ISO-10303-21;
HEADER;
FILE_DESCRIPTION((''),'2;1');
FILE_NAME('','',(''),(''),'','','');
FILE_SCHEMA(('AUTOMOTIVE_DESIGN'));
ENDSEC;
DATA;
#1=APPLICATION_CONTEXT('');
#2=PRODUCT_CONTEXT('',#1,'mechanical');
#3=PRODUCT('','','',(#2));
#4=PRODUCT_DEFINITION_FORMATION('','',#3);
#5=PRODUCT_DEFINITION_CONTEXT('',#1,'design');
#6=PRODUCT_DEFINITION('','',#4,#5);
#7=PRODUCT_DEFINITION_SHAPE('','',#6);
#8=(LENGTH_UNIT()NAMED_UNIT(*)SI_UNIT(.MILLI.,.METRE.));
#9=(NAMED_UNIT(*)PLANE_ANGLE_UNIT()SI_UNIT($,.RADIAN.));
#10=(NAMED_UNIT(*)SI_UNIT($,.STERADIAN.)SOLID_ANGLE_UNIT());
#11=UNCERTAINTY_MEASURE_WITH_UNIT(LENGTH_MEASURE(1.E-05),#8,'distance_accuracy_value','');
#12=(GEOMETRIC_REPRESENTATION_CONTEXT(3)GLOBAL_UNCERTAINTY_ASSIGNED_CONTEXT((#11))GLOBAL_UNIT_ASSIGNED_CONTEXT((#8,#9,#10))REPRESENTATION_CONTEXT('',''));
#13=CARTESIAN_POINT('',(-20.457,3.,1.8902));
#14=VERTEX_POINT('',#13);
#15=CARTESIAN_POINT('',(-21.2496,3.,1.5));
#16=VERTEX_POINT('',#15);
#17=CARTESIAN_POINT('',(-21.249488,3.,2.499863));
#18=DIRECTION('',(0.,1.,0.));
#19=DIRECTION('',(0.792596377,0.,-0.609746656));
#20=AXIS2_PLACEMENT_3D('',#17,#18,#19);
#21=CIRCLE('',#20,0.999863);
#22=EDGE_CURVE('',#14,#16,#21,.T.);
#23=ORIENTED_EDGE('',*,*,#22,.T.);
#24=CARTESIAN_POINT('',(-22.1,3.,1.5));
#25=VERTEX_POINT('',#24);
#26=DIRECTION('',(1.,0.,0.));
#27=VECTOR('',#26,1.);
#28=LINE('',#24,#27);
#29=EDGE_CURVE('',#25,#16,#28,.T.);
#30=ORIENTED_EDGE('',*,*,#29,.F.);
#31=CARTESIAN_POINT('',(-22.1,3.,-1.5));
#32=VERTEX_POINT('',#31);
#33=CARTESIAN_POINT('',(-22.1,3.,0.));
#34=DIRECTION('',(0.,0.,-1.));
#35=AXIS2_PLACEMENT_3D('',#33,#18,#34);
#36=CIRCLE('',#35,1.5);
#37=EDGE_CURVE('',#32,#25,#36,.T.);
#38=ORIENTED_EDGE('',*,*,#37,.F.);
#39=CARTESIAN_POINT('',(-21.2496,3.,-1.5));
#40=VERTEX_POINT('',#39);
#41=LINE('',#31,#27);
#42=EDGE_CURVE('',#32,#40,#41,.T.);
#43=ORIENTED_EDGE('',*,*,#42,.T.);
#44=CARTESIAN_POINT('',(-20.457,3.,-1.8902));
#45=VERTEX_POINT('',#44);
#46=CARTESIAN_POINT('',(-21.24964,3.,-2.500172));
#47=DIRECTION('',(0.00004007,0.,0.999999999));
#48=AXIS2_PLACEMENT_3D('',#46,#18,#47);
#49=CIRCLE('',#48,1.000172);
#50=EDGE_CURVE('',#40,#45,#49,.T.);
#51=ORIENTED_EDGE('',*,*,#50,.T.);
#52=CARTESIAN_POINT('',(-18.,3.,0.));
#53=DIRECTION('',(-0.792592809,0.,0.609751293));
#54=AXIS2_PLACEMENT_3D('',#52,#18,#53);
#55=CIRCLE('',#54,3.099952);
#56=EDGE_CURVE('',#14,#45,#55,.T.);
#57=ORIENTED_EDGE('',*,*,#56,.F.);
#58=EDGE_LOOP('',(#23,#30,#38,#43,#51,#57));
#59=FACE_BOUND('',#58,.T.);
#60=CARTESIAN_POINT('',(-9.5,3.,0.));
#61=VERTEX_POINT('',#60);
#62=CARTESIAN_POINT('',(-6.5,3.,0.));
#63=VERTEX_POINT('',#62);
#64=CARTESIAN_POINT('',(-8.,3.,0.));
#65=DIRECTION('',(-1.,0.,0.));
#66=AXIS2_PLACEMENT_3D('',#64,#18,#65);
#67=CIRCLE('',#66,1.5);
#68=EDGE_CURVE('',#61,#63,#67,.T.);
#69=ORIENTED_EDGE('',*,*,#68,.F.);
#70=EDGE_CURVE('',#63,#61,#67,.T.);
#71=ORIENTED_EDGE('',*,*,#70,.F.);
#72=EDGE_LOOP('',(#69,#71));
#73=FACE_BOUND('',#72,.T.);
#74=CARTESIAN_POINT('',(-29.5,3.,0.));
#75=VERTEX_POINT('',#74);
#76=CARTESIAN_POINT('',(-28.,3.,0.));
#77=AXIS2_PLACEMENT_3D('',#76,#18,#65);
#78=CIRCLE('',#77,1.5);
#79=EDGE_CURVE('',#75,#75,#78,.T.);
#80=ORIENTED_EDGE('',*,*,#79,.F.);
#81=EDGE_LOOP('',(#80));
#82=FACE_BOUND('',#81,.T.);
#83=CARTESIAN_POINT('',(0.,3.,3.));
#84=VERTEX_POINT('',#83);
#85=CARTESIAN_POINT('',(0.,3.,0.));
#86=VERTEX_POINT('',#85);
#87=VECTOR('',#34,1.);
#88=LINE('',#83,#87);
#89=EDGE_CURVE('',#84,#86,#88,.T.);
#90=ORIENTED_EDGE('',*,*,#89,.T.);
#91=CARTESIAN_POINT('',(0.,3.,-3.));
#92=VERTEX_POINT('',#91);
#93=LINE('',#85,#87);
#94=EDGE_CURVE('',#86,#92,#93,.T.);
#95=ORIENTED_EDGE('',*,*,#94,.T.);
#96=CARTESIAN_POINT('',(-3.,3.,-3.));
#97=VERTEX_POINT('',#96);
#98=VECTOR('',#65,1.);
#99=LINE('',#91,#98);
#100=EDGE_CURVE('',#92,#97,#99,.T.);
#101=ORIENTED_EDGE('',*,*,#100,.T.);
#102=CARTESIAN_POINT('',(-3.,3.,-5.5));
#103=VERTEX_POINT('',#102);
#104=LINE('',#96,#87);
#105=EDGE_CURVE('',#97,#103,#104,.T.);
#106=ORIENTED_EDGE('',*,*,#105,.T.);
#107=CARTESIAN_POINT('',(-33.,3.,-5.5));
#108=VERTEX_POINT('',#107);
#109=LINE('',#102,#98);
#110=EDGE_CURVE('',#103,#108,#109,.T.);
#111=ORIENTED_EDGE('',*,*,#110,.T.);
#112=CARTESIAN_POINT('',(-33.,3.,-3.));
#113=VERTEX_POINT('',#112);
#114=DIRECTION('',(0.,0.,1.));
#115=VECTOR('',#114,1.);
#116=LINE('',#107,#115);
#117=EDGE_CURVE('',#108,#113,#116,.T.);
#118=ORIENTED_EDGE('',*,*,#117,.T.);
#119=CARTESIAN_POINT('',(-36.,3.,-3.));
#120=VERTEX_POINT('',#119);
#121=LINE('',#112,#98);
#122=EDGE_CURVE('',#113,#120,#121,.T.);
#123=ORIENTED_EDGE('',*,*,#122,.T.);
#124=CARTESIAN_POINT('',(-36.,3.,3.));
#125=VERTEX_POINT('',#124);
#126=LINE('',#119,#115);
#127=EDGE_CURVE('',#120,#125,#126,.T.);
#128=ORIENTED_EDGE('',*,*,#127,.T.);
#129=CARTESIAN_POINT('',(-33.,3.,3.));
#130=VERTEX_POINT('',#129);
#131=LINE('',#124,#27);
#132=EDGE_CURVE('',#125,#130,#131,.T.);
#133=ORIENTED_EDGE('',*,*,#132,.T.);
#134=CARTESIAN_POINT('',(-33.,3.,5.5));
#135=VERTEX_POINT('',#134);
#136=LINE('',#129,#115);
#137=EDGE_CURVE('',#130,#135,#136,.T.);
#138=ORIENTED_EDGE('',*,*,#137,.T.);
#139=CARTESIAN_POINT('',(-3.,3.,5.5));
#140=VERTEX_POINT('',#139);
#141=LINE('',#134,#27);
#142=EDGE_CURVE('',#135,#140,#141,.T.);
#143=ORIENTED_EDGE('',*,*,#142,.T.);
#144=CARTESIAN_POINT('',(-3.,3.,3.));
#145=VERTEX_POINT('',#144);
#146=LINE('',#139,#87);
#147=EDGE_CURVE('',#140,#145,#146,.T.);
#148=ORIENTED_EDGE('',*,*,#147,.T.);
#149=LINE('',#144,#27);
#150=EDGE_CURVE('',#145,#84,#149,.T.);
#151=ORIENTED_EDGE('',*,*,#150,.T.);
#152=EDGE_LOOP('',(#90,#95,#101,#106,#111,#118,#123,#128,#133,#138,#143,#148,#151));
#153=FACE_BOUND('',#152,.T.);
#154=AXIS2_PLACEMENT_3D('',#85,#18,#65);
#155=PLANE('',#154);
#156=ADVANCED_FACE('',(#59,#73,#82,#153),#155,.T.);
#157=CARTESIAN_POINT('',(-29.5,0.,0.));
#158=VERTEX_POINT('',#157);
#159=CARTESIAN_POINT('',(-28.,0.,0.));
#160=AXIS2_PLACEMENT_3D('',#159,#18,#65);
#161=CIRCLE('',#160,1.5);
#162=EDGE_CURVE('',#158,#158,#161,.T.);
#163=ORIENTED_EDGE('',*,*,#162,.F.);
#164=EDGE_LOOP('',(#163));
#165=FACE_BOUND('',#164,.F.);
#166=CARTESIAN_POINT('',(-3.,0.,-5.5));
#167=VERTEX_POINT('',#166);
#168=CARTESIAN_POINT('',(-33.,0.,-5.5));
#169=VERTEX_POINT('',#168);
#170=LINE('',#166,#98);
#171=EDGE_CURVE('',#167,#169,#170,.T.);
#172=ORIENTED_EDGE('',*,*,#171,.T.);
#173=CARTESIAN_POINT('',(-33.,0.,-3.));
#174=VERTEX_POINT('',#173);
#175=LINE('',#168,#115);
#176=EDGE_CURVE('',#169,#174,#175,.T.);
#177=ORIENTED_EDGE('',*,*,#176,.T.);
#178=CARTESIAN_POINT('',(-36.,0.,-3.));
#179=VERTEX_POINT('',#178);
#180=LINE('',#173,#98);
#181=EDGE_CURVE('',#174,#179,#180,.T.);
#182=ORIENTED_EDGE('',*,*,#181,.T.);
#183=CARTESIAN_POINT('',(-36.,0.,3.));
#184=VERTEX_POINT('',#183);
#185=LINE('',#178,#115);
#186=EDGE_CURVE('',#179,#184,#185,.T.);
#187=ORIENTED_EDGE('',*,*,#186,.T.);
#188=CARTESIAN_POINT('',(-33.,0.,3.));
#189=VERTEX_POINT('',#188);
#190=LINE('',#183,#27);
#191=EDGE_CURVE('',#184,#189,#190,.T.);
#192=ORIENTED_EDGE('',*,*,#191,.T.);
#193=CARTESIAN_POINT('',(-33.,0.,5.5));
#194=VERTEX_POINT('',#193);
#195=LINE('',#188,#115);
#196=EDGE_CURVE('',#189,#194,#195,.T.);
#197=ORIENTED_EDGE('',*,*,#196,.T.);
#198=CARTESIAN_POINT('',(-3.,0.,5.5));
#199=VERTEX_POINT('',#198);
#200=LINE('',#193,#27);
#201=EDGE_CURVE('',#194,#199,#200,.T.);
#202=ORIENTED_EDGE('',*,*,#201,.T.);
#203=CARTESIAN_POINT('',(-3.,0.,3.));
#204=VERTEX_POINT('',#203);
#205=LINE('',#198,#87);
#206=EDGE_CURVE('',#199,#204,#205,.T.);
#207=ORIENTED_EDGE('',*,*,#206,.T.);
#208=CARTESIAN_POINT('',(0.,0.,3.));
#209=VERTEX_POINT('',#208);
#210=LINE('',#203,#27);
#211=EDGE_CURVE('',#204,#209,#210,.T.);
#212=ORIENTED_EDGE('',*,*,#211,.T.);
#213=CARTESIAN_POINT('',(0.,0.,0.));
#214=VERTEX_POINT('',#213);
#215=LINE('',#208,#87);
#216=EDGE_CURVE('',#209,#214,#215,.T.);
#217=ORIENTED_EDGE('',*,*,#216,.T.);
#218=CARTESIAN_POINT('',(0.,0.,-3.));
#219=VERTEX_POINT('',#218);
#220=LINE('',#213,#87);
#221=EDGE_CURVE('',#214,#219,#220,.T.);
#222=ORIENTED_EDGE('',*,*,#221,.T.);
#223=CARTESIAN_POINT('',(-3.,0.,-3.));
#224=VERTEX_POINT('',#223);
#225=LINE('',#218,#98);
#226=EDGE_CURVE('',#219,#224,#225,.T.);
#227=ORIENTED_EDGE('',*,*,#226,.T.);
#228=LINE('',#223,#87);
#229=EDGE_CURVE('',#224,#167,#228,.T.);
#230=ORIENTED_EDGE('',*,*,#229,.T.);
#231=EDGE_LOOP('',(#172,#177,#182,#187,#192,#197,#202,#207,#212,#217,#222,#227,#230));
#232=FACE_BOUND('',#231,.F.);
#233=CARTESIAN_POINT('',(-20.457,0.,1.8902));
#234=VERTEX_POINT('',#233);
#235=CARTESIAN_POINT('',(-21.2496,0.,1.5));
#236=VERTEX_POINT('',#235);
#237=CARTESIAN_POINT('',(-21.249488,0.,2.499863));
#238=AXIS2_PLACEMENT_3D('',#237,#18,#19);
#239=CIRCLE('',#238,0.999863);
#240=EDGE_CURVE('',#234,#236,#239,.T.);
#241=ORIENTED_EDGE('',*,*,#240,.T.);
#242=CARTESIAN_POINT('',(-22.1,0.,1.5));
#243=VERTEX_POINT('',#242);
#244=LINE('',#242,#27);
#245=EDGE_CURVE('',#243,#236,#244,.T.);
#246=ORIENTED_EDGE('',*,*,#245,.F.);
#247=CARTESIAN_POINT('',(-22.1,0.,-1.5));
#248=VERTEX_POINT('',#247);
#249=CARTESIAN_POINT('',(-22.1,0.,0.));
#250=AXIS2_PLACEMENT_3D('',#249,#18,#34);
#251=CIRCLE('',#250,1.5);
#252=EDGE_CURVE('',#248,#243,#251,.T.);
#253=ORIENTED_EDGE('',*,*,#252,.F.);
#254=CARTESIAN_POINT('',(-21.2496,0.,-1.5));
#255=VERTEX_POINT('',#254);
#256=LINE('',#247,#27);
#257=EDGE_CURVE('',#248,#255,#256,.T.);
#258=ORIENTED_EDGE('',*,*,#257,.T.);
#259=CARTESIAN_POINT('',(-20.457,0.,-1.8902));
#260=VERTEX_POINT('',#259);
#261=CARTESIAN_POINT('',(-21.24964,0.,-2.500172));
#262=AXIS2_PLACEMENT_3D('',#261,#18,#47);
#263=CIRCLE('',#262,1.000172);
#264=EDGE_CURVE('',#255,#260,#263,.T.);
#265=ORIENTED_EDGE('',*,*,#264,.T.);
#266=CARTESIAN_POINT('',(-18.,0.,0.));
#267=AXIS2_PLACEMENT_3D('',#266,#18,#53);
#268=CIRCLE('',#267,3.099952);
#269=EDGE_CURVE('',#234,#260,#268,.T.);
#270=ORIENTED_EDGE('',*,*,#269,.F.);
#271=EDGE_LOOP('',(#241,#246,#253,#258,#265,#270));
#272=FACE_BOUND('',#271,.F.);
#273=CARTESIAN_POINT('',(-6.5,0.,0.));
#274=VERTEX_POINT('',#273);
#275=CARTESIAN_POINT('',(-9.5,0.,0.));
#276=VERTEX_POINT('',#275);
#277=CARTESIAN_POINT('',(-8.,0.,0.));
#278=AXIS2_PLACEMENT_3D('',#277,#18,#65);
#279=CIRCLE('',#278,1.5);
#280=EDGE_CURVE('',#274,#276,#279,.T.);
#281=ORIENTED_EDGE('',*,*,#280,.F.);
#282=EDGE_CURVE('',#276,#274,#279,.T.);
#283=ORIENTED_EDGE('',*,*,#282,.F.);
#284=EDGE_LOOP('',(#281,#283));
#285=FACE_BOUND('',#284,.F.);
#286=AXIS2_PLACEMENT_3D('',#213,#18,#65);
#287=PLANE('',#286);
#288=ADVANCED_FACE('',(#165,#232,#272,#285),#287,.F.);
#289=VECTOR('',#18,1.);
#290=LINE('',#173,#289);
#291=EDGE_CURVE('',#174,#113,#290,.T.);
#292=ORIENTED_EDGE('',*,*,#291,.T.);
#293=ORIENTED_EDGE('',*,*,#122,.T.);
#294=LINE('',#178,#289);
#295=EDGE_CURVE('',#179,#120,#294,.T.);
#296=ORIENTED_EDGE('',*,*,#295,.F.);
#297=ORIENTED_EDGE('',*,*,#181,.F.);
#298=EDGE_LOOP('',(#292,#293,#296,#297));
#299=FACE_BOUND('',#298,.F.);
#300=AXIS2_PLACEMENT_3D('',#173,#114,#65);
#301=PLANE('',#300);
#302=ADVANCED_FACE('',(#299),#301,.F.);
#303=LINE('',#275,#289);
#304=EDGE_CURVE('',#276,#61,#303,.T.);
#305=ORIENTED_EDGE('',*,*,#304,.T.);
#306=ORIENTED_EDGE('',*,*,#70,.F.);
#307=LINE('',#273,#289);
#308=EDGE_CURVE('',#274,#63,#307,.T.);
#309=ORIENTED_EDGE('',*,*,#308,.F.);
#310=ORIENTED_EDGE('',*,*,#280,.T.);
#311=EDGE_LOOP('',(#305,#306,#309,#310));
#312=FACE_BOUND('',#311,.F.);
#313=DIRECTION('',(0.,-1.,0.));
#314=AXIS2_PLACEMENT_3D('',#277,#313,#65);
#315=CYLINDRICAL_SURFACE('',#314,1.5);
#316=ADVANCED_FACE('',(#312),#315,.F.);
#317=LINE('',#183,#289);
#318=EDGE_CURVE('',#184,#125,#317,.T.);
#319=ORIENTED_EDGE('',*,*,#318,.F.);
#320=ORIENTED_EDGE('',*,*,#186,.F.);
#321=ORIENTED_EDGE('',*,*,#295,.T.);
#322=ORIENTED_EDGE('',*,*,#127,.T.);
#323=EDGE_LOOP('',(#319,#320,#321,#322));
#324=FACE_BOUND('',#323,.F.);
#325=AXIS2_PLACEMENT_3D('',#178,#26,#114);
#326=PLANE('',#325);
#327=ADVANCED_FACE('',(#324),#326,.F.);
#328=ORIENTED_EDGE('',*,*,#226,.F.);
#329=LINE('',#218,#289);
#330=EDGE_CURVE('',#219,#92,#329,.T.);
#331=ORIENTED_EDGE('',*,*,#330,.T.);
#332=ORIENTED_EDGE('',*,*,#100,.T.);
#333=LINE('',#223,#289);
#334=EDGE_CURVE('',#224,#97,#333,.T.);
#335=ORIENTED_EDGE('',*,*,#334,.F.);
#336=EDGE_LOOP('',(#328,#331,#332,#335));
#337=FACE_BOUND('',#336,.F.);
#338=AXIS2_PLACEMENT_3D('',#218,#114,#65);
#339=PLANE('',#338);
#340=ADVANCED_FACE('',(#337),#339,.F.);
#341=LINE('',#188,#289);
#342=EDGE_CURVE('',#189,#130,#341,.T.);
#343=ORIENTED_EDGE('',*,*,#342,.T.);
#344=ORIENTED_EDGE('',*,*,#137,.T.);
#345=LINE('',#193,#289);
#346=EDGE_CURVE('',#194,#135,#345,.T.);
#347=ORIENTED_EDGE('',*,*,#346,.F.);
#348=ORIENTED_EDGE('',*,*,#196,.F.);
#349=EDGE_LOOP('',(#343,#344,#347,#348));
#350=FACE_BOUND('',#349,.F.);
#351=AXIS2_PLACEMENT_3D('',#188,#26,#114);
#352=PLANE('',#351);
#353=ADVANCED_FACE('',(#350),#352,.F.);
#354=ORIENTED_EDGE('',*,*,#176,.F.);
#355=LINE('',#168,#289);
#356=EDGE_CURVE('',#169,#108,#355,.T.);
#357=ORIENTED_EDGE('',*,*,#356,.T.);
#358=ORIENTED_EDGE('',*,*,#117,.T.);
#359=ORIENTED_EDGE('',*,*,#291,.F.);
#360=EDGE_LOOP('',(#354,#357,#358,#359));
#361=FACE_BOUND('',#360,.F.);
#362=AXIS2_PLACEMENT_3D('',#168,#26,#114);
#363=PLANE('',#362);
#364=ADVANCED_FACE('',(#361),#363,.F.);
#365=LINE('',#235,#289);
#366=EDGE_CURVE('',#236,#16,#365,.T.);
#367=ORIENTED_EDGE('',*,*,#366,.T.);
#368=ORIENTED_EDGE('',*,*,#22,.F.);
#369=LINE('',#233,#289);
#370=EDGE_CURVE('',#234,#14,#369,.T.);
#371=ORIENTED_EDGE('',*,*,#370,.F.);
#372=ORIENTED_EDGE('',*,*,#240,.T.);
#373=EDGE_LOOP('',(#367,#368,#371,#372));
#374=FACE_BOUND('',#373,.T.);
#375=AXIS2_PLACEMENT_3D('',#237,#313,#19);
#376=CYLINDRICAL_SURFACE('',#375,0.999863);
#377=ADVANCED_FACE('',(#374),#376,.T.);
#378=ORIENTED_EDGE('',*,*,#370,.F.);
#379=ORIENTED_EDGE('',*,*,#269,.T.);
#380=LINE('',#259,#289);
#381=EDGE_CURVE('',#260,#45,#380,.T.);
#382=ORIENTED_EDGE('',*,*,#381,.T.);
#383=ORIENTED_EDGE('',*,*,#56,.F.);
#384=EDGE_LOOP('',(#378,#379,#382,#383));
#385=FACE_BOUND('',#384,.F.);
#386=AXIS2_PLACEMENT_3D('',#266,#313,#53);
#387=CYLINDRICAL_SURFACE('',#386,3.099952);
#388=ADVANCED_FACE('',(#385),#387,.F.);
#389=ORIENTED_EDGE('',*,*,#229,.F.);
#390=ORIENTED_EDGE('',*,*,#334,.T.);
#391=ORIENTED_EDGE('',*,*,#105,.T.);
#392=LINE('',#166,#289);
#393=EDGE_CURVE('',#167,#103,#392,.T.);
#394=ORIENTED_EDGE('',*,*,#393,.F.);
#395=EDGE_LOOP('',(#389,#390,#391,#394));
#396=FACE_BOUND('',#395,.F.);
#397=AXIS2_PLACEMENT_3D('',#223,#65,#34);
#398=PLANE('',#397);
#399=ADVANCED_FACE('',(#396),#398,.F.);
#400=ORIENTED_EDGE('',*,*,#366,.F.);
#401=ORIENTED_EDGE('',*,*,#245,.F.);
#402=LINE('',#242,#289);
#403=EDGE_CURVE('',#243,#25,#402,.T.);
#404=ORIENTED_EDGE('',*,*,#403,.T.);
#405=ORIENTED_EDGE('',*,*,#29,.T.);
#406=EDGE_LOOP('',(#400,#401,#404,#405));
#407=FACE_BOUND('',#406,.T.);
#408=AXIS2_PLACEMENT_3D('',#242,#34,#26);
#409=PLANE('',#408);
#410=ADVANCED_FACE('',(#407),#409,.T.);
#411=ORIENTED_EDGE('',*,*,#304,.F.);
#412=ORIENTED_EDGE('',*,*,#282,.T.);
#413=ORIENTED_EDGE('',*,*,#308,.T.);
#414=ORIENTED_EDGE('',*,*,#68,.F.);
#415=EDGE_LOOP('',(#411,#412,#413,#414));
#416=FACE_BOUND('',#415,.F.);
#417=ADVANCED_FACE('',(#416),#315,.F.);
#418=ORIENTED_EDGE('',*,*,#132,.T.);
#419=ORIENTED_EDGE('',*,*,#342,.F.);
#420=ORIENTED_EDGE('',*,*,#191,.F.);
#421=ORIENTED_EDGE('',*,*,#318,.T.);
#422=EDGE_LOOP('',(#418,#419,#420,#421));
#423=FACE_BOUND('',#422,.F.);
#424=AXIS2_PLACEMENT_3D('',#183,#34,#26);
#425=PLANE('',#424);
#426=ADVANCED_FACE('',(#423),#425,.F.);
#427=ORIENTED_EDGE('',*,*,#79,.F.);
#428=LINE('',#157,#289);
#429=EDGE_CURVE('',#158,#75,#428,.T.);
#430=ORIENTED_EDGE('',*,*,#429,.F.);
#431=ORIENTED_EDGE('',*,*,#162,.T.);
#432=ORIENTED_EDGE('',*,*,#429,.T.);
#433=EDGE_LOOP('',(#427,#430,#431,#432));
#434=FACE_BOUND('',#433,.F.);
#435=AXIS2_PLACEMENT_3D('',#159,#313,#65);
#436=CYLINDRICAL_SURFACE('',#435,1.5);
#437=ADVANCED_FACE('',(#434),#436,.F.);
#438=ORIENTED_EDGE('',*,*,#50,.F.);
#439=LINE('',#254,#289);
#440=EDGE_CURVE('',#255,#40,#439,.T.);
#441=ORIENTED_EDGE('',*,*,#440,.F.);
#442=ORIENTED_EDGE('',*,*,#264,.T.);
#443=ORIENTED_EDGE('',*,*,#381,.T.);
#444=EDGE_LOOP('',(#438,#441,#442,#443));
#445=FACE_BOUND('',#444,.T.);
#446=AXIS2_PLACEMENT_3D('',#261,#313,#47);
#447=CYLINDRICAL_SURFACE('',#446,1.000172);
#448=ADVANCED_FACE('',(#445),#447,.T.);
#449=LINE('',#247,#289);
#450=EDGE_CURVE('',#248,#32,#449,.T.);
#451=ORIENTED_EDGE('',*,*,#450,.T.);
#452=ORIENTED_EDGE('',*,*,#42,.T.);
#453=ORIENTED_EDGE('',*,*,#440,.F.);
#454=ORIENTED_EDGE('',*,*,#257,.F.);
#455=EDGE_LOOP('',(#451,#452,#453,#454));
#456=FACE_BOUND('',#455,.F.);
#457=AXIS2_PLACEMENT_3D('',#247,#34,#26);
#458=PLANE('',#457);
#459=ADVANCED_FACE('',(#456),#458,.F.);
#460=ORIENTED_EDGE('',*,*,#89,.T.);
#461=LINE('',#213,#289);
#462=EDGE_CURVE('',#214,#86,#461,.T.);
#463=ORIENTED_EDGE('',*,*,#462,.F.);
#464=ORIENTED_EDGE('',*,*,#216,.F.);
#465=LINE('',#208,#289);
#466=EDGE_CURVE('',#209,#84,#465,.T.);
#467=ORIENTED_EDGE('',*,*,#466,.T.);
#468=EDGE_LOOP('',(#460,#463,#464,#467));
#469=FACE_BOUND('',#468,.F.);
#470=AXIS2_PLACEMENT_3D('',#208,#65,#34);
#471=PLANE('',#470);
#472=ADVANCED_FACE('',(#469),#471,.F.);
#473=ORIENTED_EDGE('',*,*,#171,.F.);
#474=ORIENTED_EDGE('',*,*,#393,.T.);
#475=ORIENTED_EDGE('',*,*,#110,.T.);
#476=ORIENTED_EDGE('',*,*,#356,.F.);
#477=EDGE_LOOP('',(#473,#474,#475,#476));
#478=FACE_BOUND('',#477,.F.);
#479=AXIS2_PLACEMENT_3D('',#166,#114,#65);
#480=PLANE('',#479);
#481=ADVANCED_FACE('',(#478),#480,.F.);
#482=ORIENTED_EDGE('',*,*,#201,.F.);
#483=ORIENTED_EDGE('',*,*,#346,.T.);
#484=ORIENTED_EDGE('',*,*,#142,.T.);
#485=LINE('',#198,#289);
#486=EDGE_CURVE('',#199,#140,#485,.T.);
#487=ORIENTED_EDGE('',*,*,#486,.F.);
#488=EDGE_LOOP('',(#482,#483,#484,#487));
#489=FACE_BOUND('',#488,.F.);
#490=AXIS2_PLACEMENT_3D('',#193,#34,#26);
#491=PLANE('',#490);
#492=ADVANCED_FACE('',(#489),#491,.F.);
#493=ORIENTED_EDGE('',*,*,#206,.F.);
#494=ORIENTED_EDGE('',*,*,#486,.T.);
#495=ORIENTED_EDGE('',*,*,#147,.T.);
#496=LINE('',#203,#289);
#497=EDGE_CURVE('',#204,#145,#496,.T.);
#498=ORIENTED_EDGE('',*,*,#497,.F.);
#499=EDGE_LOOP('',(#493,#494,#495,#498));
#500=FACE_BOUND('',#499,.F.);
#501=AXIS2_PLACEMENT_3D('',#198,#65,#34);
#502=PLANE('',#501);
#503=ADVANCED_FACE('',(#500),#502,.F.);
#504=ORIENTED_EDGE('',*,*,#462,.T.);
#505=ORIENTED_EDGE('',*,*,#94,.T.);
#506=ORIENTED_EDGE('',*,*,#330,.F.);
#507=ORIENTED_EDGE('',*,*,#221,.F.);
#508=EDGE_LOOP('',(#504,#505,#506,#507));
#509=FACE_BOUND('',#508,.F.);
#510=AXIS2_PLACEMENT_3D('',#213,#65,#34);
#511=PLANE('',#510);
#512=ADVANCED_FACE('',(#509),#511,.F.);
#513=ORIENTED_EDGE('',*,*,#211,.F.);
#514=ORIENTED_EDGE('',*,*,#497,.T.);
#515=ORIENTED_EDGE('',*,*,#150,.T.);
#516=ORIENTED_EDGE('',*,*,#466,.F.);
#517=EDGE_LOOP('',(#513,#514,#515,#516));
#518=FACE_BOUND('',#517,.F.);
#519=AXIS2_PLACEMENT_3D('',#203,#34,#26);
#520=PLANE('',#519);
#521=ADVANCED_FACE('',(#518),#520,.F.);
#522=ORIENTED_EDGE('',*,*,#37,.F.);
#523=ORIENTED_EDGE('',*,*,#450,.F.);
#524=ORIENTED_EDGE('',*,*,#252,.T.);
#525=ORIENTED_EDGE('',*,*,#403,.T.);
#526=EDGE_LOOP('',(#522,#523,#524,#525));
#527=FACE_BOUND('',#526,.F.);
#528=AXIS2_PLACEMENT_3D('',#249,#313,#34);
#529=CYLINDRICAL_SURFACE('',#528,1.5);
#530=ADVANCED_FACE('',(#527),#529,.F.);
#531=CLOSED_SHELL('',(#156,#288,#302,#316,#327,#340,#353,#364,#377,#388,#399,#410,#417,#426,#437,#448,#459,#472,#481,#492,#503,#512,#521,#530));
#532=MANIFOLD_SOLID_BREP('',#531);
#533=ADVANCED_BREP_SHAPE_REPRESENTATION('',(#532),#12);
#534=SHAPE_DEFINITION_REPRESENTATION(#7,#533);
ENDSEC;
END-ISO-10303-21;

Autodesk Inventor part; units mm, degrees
ref_plane "YZ Plane" through (0, 0, 0) normal (1, 0, 0) x (0, 1, 0)
ref_plane "XZ Plane" through (0, 0, 0) normal (0, 1, 0) x (-1, 0, 0)
ref_plane "XY Plane" through (0, 0, 0) normal (0, 0, 1) x (1, 0, 0)
sketch "Sketch1" plane through (0, 0, 0) normal (0, 1, 0) x (-1, 0, 0)
  line L0 (0, 0) -> (0, -3)
  line L1 (0, -3) -> (3, -3)
  line L2 (3, -3) -> (3, -5.5)
  line L3 (3, -5.5) -> (33, -5.5)
  line L4 (33, -5.5) -> (33, -3)
  line L5 (33, -3) -> (36, -3)
  line L6 (36, -3) -> (36, 3)
  line L7 (36, 3) -> (33, 3)
  line L8 (33, 3) -> (33, 5.5)
  line L9 (33, 5.5) -> (3, 5.5)
  line L10 (3, 5.5) -> (3, 3)
  line L11 (3, 3) -> (0, 3)
  line L12 (0, 3) -> (0, 0)
  circle A0 centre (28, 0) radius 1.5
  line L13 (0, 0) -> (8, 0)
  circle A1 centre (8, 0) radius 1.5
  line L14 (22.1, 1.5) -> (21.2496, 1.5)
  line L15 (22.1, -1.5) -> (21.2496, -1.5)
  arc A2 (22.1, -1.5) -> (22.1, 1.5) centre (22.1, 0) ccw
  arc A3 (20.457, 1.8902) -> (20.457, -1.8902) centre (18, 0) ccw
  arc A4 (20.457, 1.8902) -> (21.2496, 1.5) centre (21.2496, 2.5) ccw
  arc A5 (21.2496, -1.5) -> (20.457, -1.8902) centre (21.2496, -2.5) ccw
  point P0 (20.7129, 1.5)
  point P1 (20.7129, -1.5)
  dimension "d15" = 3
  dimension "d16" = 3
  dimension "d17" = 2.5
  dimension "d18" = 30
  dimension "d19" = 3
  dimension "d20" = 6
  dimension "d21" = 2.5
  dimension "d22" = 30
  dimension "d25" = 3
  dimension "d26" = 8
  dimension "d27" = 3
  dimension "d30" = 1
  dimension "d31" = 8
  dimension "d32" = 11
  dimension "d33" = 20
extrude "Extrusion1" add sketch "Sketch1" along normal blind 3
properties part number "Laser Mount Plate" material "Polycarbonate, Smoke"
